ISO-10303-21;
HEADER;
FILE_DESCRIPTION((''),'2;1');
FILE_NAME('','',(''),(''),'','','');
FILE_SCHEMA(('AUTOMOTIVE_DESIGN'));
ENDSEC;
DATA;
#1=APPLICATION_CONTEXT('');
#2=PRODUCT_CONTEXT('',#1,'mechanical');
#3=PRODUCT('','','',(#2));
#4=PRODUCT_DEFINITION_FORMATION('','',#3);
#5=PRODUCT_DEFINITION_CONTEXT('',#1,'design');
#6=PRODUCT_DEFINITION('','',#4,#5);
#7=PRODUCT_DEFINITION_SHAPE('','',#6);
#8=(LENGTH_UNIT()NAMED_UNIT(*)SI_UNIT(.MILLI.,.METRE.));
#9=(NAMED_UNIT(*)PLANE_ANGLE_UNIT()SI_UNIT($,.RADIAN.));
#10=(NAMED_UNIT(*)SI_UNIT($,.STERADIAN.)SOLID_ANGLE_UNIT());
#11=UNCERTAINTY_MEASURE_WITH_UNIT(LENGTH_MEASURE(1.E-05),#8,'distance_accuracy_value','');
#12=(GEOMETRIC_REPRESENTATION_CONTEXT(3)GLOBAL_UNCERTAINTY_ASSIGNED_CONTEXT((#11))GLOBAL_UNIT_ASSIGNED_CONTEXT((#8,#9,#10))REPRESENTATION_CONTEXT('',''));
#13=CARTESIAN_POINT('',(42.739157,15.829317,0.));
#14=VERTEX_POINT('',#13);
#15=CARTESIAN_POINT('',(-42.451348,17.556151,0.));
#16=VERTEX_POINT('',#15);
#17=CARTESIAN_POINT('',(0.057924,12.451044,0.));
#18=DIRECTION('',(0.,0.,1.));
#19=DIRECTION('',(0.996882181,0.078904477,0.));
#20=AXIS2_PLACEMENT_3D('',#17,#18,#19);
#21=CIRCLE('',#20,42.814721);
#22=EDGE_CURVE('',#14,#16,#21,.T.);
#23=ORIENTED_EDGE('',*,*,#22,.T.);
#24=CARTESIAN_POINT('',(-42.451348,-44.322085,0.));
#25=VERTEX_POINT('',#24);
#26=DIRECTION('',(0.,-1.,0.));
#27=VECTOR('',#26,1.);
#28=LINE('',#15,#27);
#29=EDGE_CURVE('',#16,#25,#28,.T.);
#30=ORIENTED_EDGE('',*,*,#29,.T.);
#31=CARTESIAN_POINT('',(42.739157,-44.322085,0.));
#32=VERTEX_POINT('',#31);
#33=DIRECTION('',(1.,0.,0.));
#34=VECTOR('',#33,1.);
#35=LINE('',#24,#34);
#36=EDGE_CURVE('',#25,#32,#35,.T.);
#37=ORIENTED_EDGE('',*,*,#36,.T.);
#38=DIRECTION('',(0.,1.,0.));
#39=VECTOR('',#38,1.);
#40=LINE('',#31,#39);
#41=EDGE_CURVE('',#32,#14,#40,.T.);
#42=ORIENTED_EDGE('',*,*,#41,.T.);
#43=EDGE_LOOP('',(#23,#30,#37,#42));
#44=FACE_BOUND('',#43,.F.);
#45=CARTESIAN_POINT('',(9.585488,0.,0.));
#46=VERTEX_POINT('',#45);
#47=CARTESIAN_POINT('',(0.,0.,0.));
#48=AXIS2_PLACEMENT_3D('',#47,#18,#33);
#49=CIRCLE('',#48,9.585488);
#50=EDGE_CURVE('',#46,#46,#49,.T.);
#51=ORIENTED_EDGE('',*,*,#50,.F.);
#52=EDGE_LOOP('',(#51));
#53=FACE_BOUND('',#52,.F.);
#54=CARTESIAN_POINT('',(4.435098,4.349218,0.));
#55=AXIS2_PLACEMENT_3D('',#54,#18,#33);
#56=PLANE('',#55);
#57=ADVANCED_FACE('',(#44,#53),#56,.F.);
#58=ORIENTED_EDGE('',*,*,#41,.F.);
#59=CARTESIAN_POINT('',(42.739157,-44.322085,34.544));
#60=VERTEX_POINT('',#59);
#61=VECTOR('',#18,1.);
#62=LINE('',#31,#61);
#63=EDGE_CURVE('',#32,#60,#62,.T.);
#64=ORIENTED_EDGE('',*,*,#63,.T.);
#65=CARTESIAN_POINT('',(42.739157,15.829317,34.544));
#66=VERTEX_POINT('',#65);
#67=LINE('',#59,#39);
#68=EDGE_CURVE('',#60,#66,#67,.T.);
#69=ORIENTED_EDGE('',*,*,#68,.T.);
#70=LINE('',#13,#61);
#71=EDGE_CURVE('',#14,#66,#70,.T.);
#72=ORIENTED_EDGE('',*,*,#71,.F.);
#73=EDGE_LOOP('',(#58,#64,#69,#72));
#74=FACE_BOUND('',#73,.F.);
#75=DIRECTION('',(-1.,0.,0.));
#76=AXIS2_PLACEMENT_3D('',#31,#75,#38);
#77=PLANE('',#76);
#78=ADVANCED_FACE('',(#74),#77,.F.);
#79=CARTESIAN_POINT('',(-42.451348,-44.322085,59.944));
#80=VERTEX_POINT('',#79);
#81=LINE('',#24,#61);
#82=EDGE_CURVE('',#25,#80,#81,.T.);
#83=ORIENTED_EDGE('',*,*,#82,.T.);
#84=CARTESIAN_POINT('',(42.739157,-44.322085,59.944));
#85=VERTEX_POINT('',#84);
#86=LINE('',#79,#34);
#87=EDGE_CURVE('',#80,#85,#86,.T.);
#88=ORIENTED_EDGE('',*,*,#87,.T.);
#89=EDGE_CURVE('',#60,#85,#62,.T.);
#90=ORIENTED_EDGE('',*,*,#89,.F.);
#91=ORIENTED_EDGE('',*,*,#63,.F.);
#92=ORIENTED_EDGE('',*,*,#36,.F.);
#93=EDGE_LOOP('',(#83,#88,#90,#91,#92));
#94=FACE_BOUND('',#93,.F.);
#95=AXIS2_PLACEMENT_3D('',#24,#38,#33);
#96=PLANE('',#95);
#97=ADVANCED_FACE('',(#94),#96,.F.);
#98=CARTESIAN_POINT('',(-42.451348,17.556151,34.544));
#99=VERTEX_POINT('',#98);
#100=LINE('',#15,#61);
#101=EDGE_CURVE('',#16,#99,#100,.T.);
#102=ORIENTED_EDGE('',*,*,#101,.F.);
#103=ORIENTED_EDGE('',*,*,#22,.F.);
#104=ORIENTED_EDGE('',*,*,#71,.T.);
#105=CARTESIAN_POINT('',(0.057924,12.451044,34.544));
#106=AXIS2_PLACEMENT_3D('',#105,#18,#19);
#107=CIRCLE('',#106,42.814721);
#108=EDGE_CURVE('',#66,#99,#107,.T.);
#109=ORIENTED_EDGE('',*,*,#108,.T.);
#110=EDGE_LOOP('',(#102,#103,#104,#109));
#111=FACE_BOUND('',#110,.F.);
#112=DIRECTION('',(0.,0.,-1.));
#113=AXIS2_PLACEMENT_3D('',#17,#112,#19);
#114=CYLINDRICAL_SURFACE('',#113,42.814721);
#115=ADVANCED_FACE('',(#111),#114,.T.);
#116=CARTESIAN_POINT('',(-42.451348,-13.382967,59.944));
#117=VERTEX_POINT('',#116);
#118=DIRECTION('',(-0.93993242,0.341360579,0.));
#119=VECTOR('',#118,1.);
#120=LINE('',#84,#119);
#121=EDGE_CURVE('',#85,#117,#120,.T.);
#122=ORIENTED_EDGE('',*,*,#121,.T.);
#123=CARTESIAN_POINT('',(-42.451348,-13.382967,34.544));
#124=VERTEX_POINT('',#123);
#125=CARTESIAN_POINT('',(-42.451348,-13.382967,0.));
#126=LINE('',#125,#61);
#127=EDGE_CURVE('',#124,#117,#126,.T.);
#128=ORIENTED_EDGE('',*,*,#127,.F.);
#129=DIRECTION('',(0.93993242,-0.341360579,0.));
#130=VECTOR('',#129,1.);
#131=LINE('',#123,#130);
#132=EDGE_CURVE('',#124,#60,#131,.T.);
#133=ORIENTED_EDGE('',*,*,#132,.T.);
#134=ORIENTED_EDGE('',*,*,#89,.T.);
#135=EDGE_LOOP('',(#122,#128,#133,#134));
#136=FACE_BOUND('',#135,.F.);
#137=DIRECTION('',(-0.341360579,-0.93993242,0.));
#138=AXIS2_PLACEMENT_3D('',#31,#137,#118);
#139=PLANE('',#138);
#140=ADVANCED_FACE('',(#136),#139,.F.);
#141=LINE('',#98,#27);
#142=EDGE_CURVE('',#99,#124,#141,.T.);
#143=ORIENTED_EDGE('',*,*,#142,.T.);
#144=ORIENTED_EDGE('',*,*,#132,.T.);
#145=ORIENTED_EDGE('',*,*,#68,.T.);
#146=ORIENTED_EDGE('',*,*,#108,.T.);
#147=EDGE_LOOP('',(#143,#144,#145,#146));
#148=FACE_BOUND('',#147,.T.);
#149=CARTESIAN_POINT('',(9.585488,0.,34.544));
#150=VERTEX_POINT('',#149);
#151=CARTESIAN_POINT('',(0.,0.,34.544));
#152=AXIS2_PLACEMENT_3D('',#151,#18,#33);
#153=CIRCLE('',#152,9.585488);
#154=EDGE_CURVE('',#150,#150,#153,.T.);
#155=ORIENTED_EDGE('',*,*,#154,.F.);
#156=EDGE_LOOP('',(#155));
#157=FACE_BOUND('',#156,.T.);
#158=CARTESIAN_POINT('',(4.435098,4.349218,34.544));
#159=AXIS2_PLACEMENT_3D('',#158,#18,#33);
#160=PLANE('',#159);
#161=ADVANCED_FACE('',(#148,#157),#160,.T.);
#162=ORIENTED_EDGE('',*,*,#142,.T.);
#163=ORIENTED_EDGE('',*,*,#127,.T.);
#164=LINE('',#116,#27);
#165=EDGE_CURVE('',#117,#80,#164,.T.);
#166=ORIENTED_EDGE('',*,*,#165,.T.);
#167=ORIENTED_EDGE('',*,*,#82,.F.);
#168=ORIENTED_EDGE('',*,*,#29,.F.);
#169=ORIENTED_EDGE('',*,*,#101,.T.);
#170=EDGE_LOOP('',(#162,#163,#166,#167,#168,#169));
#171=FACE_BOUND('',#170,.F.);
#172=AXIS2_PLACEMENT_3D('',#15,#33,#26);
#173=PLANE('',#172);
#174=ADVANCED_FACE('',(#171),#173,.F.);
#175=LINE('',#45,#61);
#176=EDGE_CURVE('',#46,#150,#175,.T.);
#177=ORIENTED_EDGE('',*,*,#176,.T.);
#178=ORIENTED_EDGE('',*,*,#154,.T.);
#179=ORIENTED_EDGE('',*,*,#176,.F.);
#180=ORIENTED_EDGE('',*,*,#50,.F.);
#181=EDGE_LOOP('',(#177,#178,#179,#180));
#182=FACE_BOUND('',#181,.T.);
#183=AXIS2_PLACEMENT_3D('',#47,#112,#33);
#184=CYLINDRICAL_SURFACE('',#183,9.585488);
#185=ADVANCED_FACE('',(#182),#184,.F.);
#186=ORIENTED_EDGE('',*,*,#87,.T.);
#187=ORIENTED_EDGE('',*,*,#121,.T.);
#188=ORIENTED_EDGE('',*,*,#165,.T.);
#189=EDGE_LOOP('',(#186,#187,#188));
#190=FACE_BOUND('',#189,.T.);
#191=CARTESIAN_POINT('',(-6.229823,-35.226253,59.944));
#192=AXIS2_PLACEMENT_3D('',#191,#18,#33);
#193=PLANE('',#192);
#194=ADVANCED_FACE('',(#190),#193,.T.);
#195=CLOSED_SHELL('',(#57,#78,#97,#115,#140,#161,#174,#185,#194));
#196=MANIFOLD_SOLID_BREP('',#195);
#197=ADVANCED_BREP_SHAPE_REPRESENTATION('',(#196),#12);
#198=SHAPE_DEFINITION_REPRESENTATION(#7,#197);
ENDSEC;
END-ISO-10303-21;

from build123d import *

# Parameters (mm, degrees)
F1_DEPTH = 59.944
F0_R     = 9.5854875755
F2_DEPTH = 34.544


with BuildPart() as f1:
    # F0 (on Top) → F1 (new body)
    with BuildSketch(Plane.XY):
        Polygon((42.7391566336, -44.3220846355), (-42.4513481557, -13.3829666302), (-42.4513481557, -44.3220846355), align=None)
    extrude(amount=F1_DEPTH)

    # F0 (on Top) → F2 (join)
    with BuildSketch(Plane.XY):
        with BuildLine():
            ThreePointArc((42.7391566336, 15.8293172717), (0.9256115544, 55.2569720027), (-42.4513481557, 17.5561513752))
            Line((-42.4513481557, 17.5561513752), (-42.4513481557, -13.3829666302))
            Line((-42.4513481557, -13.3829666302), (42.7391566336, -44.3220846355))
            Line((42.7391566336, -44.3220846355), (42.7391566336, 15.8293172717))
        make_face()
        Circle(F0_R, mode=Mode.SUBTRACT)
    extrude(amount=F2_DEPTH)


solid = f1.part
